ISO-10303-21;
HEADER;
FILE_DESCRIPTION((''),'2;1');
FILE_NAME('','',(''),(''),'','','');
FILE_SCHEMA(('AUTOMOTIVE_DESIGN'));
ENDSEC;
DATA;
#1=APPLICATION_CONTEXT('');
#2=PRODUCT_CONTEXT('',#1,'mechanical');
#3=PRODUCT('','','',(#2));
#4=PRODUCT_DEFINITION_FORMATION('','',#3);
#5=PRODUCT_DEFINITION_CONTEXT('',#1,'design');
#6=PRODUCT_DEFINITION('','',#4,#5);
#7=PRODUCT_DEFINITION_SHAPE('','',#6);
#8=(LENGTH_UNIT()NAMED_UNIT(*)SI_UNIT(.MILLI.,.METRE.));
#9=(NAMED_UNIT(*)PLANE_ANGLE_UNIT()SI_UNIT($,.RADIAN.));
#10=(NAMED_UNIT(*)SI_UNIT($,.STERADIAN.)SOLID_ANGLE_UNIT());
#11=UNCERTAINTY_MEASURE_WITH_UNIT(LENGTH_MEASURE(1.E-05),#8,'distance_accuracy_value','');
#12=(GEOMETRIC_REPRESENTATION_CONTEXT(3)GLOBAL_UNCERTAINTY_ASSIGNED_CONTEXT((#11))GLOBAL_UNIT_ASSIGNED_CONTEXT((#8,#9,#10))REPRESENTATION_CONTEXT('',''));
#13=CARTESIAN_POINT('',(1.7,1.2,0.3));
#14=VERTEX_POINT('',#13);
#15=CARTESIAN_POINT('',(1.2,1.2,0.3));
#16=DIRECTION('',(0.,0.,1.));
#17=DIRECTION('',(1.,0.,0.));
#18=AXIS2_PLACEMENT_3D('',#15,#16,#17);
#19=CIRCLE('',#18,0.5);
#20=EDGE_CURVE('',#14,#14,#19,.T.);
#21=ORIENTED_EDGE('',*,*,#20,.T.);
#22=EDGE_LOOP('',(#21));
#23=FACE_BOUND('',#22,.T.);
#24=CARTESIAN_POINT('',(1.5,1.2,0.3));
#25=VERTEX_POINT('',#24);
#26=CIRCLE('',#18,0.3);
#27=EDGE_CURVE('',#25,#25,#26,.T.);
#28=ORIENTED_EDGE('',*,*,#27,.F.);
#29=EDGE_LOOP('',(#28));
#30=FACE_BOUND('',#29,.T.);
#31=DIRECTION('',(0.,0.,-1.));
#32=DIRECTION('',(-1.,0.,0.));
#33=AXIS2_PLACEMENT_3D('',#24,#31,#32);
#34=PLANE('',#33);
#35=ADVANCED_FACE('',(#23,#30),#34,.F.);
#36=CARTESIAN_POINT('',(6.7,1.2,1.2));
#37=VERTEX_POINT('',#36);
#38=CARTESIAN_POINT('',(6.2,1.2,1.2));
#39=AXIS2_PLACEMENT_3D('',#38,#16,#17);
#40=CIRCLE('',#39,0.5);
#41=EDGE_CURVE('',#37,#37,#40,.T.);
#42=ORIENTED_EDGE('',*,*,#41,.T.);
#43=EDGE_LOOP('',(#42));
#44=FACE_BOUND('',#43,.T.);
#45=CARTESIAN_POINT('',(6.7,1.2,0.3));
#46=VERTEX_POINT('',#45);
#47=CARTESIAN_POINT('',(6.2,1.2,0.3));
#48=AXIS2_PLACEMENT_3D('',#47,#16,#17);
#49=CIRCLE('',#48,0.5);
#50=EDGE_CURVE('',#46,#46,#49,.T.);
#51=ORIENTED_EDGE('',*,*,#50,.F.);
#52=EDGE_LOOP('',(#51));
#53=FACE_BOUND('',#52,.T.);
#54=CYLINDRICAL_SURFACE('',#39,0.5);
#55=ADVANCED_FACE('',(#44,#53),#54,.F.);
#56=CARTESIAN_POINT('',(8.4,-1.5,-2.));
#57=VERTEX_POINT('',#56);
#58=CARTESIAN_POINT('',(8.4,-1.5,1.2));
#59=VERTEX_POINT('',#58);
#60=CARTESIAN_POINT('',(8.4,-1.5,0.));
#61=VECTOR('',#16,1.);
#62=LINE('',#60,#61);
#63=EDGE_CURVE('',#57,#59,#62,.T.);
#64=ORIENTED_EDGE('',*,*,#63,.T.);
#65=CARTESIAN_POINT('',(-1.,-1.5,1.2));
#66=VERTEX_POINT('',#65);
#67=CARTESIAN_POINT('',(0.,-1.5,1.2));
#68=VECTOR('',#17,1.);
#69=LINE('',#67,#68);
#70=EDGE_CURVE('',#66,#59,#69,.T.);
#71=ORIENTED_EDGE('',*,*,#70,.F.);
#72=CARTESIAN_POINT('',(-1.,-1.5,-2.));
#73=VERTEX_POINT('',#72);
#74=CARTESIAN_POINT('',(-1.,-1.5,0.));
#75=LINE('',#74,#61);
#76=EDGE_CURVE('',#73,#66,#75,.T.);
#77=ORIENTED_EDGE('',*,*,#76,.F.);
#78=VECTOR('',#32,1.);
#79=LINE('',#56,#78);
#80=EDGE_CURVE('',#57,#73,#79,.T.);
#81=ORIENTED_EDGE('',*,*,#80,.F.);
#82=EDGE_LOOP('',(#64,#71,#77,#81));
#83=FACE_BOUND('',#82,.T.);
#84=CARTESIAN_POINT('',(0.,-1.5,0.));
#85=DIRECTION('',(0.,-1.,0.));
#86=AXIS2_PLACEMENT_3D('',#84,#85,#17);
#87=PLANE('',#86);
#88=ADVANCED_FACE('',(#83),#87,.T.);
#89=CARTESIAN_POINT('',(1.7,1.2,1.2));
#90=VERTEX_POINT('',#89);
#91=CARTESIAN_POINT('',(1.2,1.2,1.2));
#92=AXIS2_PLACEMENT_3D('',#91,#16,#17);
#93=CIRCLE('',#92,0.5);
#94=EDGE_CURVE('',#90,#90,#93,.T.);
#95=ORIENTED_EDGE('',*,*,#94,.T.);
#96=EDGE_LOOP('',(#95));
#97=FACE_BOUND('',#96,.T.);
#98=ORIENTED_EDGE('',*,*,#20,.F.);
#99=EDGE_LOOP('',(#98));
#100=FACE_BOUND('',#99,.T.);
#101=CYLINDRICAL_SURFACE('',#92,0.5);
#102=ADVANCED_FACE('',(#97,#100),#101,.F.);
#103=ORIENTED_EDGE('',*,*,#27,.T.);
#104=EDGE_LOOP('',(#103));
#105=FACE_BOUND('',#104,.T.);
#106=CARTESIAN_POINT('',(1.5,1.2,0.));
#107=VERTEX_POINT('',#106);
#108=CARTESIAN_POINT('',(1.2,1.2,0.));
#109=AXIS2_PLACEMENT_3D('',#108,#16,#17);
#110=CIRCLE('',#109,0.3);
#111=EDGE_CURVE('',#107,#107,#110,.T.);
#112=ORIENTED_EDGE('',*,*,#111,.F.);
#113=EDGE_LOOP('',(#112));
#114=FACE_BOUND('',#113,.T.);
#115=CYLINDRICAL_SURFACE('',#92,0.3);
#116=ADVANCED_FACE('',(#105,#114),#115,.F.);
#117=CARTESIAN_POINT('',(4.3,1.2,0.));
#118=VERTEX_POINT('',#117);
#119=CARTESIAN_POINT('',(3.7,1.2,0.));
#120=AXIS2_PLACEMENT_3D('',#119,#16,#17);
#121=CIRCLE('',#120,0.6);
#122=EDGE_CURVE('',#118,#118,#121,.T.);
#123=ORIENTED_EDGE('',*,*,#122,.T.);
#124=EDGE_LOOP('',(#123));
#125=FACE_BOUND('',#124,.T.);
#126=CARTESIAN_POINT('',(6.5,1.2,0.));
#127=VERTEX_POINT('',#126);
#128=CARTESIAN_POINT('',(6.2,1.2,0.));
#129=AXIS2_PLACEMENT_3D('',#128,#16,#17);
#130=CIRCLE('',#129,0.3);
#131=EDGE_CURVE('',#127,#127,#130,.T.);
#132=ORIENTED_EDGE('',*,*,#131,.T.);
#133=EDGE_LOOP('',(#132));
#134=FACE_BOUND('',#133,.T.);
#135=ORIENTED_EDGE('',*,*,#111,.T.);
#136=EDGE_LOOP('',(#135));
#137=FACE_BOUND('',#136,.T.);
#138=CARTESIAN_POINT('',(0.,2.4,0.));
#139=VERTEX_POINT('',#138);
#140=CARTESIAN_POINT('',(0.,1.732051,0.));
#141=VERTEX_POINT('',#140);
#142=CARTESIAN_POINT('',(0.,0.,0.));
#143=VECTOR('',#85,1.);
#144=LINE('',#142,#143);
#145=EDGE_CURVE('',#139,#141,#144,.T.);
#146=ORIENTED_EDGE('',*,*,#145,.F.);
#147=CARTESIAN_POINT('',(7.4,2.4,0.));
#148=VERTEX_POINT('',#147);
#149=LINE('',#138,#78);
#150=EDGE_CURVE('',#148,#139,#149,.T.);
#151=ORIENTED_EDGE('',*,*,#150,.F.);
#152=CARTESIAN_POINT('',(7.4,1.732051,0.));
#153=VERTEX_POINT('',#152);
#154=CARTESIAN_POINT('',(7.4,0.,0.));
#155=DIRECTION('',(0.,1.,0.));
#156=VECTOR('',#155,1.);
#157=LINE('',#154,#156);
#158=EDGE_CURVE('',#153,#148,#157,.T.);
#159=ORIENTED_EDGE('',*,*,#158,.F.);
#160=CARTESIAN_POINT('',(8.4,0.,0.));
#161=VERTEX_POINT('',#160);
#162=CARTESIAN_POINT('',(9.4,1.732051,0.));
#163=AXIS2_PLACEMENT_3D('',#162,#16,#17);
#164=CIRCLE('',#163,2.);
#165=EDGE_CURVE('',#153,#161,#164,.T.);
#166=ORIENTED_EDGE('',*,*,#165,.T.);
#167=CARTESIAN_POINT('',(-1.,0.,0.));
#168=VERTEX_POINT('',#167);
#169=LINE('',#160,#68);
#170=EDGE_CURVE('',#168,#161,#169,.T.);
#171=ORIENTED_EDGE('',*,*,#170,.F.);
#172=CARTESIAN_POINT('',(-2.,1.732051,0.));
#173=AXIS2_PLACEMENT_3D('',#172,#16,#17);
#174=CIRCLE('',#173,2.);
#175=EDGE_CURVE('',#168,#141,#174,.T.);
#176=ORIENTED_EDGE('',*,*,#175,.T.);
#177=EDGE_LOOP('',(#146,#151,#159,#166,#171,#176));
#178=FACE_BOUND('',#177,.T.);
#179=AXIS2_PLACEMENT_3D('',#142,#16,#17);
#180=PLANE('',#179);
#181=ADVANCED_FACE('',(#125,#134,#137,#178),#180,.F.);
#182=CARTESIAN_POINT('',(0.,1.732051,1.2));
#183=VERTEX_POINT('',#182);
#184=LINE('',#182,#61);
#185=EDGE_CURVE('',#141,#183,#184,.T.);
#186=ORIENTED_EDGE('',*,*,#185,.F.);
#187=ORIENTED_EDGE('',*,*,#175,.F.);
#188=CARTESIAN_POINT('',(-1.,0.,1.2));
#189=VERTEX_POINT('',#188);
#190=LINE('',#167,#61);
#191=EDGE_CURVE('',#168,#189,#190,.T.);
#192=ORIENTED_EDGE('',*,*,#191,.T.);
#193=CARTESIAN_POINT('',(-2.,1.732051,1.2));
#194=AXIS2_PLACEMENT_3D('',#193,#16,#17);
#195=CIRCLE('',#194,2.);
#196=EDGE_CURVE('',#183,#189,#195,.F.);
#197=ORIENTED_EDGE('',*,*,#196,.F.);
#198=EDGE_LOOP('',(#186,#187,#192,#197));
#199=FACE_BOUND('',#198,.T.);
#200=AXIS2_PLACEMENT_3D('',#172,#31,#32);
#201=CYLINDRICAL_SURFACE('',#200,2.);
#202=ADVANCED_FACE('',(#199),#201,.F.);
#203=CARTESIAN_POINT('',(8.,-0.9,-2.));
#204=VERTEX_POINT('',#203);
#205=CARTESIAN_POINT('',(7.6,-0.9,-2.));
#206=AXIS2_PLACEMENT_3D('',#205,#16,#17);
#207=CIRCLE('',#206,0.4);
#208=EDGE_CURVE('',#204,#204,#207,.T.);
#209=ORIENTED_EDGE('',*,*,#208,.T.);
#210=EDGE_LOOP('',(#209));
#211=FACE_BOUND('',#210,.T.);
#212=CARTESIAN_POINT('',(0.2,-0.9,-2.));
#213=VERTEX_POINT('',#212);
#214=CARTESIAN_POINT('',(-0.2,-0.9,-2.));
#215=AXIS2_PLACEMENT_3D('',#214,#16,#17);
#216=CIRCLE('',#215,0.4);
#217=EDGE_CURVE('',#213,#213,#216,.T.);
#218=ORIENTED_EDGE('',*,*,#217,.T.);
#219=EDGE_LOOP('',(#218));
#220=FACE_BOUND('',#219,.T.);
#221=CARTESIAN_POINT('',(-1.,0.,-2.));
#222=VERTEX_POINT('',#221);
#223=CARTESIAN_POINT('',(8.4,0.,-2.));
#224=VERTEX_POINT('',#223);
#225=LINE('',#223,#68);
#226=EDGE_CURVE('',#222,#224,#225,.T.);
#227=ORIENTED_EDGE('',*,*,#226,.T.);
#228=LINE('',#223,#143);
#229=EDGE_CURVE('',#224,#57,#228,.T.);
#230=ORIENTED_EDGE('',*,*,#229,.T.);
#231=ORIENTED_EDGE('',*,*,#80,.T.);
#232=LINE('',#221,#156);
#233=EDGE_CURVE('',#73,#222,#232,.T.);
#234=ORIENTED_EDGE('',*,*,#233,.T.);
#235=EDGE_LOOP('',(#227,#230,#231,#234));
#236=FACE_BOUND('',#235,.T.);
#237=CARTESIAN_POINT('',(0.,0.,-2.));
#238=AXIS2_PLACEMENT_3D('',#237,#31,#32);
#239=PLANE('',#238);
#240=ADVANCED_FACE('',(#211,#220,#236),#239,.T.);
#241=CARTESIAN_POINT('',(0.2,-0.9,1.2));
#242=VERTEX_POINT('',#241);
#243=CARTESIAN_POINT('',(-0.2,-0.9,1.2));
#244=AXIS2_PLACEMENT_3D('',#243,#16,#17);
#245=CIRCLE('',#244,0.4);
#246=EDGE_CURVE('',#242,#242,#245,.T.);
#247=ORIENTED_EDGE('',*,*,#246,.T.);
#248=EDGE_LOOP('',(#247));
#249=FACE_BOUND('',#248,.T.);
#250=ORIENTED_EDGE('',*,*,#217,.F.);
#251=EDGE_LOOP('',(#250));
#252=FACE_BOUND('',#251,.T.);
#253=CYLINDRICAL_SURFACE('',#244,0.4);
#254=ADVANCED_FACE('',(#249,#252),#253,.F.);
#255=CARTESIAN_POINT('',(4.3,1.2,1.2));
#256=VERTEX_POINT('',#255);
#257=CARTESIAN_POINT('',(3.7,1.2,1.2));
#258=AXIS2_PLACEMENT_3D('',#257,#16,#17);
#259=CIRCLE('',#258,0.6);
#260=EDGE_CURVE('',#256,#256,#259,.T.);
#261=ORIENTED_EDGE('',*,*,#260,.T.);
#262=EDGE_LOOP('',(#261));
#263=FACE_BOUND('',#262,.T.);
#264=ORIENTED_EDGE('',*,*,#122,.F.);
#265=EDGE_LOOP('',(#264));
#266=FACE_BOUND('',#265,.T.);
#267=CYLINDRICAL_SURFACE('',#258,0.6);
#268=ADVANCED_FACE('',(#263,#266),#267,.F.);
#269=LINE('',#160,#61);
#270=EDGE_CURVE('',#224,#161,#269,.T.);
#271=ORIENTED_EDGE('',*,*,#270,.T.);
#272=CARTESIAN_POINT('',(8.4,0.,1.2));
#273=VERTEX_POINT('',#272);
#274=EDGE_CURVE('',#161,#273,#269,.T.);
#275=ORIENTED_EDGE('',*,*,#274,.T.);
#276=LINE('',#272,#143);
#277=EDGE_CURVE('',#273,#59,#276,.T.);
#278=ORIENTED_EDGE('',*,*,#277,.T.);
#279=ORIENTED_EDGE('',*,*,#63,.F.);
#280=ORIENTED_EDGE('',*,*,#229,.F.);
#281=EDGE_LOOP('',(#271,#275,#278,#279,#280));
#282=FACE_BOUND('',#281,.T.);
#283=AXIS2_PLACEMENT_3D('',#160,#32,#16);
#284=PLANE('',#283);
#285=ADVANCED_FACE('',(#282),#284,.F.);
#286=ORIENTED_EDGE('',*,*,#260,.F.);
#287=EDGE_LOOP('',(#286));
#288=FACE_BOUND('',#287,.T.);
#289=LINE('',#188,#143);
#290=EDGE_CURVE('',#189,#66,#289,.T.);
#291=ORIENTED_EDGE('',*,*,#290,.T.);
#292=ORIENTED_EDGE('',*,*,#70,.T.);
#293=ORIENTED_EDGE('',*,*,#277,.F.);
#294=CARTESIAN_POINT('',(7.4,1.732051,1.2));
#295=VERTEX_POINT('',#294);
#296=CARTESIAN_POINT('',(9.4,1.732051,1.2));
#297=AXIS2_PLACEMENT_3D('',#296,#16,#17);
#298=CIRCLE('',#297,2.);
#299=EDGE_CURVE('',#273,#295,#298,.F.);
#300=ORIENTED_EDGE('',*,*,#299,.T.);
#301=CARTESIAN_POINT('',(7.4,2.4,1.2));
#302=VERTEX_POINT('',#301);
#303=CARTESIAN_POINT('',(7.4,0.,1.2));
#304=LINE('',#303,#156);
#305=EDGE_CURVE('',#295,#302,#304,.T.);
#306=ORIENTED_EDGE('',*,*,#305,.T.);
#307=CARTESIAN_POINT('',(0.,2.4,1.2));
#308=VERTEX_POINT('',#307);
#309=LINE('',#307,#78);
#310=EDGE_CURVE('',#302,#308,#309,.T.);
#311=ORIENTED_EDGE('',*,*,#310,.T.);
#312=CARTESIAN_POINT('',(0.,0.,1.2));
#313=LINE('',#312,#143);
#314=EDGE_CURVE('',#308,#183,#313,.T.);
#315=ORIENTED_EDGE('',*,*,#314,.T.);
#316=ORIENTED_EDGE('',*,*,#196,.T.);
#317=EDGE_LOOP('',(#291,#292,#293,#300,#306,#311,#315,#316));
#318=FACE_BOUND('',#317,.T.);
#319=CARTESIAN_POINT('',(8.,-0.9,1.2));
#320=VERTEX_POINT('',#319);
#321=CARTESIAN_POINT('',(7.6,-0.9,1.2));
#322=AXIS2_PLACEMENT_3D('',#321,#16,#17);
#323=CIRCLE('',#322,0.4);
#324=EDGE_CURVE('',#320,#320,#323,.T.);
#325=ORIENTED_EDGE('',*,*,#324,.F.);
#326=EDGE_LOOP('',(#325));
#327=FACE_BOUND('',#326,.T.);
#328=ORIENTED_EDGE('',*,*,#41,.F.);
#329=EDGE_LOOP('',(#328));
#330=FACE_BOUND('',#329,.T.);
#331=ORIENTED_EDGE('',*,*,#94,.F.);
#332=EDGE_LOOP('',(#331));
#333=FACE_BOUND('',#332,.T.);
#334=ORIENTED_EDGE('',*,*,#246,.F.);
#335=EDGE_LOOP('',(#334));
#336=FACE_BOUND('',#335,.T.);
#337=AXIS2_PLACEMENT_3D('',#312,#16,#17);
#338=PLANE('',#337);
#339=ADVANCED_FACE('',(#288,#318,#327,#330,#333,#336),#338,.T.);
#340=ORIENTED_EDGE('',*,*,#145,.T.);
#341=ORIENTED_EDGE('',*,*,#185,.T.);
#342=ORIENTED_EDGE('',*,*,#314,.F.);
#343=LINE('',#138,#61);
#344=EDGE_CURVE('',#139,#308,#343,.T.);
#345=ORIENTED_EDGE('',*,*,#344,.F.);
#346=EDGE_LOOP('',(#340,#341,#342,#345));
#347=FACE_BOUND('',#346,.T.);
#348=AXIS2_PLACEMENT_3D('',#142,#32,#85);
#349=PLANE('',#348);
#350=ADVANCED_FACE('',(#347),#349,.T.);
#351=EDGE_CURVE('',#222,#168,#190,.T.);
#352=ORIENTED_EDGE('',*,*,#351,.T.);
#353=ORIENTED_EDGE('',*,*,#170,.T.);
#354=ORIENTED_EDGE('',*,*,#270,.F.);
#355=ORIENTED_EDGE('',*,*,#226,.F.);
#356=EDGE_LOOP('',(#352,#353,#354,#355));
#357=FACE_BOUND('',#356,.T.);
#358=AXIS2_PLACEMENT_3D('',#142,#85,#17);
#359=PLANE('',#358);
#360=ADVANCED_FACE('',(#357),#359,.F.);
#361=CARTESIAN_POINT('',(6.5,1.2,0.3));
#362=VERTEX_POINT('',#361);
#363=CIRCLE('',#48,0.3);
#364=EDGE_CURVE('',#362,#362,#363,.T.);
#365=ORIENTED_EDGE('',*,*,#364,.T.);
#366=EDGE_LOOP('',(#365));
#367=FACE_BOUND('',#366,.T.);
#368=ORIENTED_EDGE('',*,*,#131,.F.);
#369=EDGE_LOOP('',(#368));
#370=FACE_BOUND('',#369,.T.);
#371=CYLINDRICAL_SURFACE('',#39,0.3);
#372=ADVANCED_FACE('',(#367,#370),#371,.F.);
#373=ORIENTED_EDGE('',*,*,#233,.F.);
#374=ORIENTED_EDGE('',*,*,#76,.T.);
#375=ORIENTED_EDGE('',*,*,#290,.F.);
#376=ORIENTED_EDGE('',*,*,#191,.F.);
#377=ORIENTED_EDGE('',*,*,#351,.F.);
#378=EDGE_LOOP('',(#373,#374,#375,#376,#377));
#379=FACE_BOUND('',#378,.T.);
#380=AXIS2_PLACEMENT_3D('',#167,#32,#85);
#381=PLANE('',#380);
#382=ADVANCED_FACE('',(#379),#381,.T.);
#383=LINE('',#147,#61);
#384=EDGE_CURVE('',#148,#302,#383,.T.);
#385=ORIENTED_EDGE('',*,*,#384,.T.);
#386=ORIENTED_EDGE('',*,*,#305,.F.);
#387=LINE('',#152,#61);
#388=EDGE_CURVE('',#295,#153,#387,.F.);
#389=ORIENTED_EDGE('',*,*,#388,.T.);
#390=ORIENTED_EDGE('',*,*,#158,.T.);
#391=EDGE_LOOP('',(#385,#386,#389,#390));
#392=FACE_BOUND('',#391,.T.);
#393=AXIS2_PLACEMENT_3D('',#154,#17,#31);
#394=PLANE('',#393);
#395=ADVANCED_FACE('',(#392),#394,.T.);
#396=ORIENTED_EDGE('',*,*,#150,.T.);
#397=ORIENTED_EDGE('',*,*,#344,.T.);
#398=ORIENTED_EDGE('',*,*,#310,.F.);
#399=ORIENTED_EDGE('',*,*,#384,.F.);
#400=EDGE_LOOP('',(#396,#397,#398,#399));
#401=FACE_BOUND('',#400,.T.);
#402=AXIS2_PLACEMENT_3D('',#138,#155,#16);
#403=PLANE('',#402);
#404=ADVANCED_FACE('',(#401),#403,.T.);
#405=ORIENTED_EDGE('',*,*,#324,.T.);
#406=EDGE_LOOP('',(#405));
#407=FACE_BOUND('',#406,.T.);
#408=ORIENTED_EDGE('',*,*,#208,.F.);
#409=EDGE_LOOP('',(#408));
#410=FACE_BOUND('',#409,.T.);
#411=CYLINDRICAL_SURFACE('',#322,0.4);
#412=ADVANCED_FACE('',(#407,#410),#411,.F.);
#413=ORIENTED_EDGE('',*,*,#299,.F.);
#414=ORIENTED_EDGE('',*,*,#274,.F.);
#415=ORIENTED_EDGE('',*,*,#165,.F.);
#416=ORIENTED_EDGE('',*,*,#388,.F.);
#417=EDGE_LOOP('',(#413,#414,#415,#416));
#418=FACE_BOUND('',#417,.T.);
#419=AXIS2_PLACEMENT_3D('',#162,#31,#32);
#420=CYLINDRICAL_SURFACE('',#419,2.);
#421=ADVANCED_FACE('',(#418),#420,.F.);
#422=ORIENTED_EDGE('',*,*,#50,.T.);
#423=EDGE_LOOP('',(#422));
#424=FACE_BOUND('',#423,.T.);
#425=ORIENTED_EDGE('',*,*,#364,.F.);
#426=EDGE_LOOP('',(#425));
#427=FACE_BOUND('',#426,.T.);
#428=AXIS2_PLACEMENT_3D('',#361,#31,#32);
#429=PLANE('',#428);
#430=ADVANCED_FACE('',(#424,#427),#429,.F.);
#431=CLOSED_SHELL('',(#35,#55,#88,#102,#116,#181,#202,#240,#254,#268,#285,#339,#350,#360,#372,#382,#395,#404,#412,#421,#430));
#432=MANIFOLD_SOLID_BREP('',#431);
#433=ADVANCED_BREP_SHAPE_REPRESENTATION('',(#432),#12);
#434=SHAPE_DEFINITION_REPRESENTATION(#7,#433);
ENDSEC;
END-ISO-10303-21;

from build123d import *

# Parameters (mm, degrees)
SKETCH1_W                  = 7.4
SKETCH1_H                  = 2.4
BOSS_EXTRUDE1_DEPTH        = 1.2
HOLE1_D                    = 0.6
HOLE1_DEPTH                = 1.2
HOLE1_CBORE_D              = 1
HOLE1_CBORE_DEPTH          = 0.9
HOLE1_TIP                  = 0.180258186
SKETCH11_W                 = 9.4
SKETCH11_H                 = 1.5
BOSS_EXTRUDE5_DEPTH        = 2
FILLET1_R                  = 2
F_0_8_0_8_DIAMETER_HOLE1_D = 0.8
M1_0_CLEARANCE_HOLE1_D     = 1.2


with BuildPart() as part:
    # Sketch1 → Boss-Extrude1 (new body)
    with BuildSketch(Plane.XY.offset(1.2)):
        with Locations((3.7, 1.2)):
            Rectangle(SKETCH1_W, SKETCH1_H)
        Polygon((8.4, 0), (7.4, 0), (0, 0), (-1, 0), (-1, -1.5), (8.4, -1.5), align=None)
    extrude(amount=-BOSS_EXTRUDE1_DEPTH)

    # Hole1
    with Locations(Plane.XY.offset(1.2)):
        with Locations((6.2, 1.2), (1.2, 1.2)):
            CounterBoreHole(HOLE1_D / 2, HOLE1_CBORE_D / 2, HOLE1_CBORE_DEPTH, depth=HOLE1_DEPTH)
            with Locations((0, 0, -(HOLE1_DEPTH + HOLE1_TIP / 2))):  # 118° drill point
                Cone(0, HOLE1_D / 2, HOLE1_TIP, mode=Mode.SUBTRACT)

    # Sketch11 → Boss-Extrude5 (add)
    with BuildSketch(Plane(origin=(0, 0, 0), x_dir=(-1, 0, 0), z_dir=(0, 0, -1))):
        with Locations((-3.7, -0.75)):
            Rectangle(SKETCH11_W, SKETCH11_H)
    extrude(amount=BOSS_EXTRUDE5_DEPTH)

    # Fillet1
    # the kernel refuses this fillet: 2 mm, written as the material it adds along each edge
    with BuildSketch(Plane(origin=(0, 0, 1.2), x_dir=(-1, 0, 0), z_dir=(0, 0, -1))) as fillet1_piece_1:
        with BuildLine():
            CenterArc((2, 1.732050808), FILLET1_R, 180, 60)
            Line((0, 1.732050808), (-0.04, 1.732050808))
            Line((-0.04, 1.732050808), (-0.04, 0))
            Line((-0.04, 0), (0, -0.04))
            ThreePointArc((0, -0.04), (0.5, -0.04), (0.98, -0.034641016))
            Line((0.98, -0.034641016), (1, 0))
        make_face()
    extrude(amount=1.2)
    with BuildSketch(Plane(origin=(7.4, 0, 1.2), x_dir=(1, 0, 0), z_dir=(0, 0, -1))) as fillet1_piece_2:
        with BuildLine():
            CenterArc((2, -1.732050808), FILLET1_R, 120, 60)
            Line((0, -1.732050808), (-0.04, -1.732050808))
            Line((-0.04, -1.732050808), (-0.04, 0))
            Line((-0.04, 0), (0, 0.04))
            ThreePointArc((0, 0.04), (0.5, 0.04), (0.98, 0.034641016))
            Line((0.98, 0.034641016), (1, 0))
        make_face()
    extrude(amount=1.2)

    # Ø0.8 (0.8) Diameter Hole1 (through all)
    with Locations(Plane.XY.offset(1.2)):
        with Locations((-0.2, -0.9), (7.6, -0.9)):
            Hole(F_0_8_0_8_DIAMETER_HOLE1_D / 2)

    # M1.0 Clearance Hole1 (through all)
    with Locations(Plane.XY.offset(1.2)):
        with Locations((3.7, 1.2)):
            Hole(M1_0_CLEARANCE_HOLE1_D / 2)


solid = part.part
